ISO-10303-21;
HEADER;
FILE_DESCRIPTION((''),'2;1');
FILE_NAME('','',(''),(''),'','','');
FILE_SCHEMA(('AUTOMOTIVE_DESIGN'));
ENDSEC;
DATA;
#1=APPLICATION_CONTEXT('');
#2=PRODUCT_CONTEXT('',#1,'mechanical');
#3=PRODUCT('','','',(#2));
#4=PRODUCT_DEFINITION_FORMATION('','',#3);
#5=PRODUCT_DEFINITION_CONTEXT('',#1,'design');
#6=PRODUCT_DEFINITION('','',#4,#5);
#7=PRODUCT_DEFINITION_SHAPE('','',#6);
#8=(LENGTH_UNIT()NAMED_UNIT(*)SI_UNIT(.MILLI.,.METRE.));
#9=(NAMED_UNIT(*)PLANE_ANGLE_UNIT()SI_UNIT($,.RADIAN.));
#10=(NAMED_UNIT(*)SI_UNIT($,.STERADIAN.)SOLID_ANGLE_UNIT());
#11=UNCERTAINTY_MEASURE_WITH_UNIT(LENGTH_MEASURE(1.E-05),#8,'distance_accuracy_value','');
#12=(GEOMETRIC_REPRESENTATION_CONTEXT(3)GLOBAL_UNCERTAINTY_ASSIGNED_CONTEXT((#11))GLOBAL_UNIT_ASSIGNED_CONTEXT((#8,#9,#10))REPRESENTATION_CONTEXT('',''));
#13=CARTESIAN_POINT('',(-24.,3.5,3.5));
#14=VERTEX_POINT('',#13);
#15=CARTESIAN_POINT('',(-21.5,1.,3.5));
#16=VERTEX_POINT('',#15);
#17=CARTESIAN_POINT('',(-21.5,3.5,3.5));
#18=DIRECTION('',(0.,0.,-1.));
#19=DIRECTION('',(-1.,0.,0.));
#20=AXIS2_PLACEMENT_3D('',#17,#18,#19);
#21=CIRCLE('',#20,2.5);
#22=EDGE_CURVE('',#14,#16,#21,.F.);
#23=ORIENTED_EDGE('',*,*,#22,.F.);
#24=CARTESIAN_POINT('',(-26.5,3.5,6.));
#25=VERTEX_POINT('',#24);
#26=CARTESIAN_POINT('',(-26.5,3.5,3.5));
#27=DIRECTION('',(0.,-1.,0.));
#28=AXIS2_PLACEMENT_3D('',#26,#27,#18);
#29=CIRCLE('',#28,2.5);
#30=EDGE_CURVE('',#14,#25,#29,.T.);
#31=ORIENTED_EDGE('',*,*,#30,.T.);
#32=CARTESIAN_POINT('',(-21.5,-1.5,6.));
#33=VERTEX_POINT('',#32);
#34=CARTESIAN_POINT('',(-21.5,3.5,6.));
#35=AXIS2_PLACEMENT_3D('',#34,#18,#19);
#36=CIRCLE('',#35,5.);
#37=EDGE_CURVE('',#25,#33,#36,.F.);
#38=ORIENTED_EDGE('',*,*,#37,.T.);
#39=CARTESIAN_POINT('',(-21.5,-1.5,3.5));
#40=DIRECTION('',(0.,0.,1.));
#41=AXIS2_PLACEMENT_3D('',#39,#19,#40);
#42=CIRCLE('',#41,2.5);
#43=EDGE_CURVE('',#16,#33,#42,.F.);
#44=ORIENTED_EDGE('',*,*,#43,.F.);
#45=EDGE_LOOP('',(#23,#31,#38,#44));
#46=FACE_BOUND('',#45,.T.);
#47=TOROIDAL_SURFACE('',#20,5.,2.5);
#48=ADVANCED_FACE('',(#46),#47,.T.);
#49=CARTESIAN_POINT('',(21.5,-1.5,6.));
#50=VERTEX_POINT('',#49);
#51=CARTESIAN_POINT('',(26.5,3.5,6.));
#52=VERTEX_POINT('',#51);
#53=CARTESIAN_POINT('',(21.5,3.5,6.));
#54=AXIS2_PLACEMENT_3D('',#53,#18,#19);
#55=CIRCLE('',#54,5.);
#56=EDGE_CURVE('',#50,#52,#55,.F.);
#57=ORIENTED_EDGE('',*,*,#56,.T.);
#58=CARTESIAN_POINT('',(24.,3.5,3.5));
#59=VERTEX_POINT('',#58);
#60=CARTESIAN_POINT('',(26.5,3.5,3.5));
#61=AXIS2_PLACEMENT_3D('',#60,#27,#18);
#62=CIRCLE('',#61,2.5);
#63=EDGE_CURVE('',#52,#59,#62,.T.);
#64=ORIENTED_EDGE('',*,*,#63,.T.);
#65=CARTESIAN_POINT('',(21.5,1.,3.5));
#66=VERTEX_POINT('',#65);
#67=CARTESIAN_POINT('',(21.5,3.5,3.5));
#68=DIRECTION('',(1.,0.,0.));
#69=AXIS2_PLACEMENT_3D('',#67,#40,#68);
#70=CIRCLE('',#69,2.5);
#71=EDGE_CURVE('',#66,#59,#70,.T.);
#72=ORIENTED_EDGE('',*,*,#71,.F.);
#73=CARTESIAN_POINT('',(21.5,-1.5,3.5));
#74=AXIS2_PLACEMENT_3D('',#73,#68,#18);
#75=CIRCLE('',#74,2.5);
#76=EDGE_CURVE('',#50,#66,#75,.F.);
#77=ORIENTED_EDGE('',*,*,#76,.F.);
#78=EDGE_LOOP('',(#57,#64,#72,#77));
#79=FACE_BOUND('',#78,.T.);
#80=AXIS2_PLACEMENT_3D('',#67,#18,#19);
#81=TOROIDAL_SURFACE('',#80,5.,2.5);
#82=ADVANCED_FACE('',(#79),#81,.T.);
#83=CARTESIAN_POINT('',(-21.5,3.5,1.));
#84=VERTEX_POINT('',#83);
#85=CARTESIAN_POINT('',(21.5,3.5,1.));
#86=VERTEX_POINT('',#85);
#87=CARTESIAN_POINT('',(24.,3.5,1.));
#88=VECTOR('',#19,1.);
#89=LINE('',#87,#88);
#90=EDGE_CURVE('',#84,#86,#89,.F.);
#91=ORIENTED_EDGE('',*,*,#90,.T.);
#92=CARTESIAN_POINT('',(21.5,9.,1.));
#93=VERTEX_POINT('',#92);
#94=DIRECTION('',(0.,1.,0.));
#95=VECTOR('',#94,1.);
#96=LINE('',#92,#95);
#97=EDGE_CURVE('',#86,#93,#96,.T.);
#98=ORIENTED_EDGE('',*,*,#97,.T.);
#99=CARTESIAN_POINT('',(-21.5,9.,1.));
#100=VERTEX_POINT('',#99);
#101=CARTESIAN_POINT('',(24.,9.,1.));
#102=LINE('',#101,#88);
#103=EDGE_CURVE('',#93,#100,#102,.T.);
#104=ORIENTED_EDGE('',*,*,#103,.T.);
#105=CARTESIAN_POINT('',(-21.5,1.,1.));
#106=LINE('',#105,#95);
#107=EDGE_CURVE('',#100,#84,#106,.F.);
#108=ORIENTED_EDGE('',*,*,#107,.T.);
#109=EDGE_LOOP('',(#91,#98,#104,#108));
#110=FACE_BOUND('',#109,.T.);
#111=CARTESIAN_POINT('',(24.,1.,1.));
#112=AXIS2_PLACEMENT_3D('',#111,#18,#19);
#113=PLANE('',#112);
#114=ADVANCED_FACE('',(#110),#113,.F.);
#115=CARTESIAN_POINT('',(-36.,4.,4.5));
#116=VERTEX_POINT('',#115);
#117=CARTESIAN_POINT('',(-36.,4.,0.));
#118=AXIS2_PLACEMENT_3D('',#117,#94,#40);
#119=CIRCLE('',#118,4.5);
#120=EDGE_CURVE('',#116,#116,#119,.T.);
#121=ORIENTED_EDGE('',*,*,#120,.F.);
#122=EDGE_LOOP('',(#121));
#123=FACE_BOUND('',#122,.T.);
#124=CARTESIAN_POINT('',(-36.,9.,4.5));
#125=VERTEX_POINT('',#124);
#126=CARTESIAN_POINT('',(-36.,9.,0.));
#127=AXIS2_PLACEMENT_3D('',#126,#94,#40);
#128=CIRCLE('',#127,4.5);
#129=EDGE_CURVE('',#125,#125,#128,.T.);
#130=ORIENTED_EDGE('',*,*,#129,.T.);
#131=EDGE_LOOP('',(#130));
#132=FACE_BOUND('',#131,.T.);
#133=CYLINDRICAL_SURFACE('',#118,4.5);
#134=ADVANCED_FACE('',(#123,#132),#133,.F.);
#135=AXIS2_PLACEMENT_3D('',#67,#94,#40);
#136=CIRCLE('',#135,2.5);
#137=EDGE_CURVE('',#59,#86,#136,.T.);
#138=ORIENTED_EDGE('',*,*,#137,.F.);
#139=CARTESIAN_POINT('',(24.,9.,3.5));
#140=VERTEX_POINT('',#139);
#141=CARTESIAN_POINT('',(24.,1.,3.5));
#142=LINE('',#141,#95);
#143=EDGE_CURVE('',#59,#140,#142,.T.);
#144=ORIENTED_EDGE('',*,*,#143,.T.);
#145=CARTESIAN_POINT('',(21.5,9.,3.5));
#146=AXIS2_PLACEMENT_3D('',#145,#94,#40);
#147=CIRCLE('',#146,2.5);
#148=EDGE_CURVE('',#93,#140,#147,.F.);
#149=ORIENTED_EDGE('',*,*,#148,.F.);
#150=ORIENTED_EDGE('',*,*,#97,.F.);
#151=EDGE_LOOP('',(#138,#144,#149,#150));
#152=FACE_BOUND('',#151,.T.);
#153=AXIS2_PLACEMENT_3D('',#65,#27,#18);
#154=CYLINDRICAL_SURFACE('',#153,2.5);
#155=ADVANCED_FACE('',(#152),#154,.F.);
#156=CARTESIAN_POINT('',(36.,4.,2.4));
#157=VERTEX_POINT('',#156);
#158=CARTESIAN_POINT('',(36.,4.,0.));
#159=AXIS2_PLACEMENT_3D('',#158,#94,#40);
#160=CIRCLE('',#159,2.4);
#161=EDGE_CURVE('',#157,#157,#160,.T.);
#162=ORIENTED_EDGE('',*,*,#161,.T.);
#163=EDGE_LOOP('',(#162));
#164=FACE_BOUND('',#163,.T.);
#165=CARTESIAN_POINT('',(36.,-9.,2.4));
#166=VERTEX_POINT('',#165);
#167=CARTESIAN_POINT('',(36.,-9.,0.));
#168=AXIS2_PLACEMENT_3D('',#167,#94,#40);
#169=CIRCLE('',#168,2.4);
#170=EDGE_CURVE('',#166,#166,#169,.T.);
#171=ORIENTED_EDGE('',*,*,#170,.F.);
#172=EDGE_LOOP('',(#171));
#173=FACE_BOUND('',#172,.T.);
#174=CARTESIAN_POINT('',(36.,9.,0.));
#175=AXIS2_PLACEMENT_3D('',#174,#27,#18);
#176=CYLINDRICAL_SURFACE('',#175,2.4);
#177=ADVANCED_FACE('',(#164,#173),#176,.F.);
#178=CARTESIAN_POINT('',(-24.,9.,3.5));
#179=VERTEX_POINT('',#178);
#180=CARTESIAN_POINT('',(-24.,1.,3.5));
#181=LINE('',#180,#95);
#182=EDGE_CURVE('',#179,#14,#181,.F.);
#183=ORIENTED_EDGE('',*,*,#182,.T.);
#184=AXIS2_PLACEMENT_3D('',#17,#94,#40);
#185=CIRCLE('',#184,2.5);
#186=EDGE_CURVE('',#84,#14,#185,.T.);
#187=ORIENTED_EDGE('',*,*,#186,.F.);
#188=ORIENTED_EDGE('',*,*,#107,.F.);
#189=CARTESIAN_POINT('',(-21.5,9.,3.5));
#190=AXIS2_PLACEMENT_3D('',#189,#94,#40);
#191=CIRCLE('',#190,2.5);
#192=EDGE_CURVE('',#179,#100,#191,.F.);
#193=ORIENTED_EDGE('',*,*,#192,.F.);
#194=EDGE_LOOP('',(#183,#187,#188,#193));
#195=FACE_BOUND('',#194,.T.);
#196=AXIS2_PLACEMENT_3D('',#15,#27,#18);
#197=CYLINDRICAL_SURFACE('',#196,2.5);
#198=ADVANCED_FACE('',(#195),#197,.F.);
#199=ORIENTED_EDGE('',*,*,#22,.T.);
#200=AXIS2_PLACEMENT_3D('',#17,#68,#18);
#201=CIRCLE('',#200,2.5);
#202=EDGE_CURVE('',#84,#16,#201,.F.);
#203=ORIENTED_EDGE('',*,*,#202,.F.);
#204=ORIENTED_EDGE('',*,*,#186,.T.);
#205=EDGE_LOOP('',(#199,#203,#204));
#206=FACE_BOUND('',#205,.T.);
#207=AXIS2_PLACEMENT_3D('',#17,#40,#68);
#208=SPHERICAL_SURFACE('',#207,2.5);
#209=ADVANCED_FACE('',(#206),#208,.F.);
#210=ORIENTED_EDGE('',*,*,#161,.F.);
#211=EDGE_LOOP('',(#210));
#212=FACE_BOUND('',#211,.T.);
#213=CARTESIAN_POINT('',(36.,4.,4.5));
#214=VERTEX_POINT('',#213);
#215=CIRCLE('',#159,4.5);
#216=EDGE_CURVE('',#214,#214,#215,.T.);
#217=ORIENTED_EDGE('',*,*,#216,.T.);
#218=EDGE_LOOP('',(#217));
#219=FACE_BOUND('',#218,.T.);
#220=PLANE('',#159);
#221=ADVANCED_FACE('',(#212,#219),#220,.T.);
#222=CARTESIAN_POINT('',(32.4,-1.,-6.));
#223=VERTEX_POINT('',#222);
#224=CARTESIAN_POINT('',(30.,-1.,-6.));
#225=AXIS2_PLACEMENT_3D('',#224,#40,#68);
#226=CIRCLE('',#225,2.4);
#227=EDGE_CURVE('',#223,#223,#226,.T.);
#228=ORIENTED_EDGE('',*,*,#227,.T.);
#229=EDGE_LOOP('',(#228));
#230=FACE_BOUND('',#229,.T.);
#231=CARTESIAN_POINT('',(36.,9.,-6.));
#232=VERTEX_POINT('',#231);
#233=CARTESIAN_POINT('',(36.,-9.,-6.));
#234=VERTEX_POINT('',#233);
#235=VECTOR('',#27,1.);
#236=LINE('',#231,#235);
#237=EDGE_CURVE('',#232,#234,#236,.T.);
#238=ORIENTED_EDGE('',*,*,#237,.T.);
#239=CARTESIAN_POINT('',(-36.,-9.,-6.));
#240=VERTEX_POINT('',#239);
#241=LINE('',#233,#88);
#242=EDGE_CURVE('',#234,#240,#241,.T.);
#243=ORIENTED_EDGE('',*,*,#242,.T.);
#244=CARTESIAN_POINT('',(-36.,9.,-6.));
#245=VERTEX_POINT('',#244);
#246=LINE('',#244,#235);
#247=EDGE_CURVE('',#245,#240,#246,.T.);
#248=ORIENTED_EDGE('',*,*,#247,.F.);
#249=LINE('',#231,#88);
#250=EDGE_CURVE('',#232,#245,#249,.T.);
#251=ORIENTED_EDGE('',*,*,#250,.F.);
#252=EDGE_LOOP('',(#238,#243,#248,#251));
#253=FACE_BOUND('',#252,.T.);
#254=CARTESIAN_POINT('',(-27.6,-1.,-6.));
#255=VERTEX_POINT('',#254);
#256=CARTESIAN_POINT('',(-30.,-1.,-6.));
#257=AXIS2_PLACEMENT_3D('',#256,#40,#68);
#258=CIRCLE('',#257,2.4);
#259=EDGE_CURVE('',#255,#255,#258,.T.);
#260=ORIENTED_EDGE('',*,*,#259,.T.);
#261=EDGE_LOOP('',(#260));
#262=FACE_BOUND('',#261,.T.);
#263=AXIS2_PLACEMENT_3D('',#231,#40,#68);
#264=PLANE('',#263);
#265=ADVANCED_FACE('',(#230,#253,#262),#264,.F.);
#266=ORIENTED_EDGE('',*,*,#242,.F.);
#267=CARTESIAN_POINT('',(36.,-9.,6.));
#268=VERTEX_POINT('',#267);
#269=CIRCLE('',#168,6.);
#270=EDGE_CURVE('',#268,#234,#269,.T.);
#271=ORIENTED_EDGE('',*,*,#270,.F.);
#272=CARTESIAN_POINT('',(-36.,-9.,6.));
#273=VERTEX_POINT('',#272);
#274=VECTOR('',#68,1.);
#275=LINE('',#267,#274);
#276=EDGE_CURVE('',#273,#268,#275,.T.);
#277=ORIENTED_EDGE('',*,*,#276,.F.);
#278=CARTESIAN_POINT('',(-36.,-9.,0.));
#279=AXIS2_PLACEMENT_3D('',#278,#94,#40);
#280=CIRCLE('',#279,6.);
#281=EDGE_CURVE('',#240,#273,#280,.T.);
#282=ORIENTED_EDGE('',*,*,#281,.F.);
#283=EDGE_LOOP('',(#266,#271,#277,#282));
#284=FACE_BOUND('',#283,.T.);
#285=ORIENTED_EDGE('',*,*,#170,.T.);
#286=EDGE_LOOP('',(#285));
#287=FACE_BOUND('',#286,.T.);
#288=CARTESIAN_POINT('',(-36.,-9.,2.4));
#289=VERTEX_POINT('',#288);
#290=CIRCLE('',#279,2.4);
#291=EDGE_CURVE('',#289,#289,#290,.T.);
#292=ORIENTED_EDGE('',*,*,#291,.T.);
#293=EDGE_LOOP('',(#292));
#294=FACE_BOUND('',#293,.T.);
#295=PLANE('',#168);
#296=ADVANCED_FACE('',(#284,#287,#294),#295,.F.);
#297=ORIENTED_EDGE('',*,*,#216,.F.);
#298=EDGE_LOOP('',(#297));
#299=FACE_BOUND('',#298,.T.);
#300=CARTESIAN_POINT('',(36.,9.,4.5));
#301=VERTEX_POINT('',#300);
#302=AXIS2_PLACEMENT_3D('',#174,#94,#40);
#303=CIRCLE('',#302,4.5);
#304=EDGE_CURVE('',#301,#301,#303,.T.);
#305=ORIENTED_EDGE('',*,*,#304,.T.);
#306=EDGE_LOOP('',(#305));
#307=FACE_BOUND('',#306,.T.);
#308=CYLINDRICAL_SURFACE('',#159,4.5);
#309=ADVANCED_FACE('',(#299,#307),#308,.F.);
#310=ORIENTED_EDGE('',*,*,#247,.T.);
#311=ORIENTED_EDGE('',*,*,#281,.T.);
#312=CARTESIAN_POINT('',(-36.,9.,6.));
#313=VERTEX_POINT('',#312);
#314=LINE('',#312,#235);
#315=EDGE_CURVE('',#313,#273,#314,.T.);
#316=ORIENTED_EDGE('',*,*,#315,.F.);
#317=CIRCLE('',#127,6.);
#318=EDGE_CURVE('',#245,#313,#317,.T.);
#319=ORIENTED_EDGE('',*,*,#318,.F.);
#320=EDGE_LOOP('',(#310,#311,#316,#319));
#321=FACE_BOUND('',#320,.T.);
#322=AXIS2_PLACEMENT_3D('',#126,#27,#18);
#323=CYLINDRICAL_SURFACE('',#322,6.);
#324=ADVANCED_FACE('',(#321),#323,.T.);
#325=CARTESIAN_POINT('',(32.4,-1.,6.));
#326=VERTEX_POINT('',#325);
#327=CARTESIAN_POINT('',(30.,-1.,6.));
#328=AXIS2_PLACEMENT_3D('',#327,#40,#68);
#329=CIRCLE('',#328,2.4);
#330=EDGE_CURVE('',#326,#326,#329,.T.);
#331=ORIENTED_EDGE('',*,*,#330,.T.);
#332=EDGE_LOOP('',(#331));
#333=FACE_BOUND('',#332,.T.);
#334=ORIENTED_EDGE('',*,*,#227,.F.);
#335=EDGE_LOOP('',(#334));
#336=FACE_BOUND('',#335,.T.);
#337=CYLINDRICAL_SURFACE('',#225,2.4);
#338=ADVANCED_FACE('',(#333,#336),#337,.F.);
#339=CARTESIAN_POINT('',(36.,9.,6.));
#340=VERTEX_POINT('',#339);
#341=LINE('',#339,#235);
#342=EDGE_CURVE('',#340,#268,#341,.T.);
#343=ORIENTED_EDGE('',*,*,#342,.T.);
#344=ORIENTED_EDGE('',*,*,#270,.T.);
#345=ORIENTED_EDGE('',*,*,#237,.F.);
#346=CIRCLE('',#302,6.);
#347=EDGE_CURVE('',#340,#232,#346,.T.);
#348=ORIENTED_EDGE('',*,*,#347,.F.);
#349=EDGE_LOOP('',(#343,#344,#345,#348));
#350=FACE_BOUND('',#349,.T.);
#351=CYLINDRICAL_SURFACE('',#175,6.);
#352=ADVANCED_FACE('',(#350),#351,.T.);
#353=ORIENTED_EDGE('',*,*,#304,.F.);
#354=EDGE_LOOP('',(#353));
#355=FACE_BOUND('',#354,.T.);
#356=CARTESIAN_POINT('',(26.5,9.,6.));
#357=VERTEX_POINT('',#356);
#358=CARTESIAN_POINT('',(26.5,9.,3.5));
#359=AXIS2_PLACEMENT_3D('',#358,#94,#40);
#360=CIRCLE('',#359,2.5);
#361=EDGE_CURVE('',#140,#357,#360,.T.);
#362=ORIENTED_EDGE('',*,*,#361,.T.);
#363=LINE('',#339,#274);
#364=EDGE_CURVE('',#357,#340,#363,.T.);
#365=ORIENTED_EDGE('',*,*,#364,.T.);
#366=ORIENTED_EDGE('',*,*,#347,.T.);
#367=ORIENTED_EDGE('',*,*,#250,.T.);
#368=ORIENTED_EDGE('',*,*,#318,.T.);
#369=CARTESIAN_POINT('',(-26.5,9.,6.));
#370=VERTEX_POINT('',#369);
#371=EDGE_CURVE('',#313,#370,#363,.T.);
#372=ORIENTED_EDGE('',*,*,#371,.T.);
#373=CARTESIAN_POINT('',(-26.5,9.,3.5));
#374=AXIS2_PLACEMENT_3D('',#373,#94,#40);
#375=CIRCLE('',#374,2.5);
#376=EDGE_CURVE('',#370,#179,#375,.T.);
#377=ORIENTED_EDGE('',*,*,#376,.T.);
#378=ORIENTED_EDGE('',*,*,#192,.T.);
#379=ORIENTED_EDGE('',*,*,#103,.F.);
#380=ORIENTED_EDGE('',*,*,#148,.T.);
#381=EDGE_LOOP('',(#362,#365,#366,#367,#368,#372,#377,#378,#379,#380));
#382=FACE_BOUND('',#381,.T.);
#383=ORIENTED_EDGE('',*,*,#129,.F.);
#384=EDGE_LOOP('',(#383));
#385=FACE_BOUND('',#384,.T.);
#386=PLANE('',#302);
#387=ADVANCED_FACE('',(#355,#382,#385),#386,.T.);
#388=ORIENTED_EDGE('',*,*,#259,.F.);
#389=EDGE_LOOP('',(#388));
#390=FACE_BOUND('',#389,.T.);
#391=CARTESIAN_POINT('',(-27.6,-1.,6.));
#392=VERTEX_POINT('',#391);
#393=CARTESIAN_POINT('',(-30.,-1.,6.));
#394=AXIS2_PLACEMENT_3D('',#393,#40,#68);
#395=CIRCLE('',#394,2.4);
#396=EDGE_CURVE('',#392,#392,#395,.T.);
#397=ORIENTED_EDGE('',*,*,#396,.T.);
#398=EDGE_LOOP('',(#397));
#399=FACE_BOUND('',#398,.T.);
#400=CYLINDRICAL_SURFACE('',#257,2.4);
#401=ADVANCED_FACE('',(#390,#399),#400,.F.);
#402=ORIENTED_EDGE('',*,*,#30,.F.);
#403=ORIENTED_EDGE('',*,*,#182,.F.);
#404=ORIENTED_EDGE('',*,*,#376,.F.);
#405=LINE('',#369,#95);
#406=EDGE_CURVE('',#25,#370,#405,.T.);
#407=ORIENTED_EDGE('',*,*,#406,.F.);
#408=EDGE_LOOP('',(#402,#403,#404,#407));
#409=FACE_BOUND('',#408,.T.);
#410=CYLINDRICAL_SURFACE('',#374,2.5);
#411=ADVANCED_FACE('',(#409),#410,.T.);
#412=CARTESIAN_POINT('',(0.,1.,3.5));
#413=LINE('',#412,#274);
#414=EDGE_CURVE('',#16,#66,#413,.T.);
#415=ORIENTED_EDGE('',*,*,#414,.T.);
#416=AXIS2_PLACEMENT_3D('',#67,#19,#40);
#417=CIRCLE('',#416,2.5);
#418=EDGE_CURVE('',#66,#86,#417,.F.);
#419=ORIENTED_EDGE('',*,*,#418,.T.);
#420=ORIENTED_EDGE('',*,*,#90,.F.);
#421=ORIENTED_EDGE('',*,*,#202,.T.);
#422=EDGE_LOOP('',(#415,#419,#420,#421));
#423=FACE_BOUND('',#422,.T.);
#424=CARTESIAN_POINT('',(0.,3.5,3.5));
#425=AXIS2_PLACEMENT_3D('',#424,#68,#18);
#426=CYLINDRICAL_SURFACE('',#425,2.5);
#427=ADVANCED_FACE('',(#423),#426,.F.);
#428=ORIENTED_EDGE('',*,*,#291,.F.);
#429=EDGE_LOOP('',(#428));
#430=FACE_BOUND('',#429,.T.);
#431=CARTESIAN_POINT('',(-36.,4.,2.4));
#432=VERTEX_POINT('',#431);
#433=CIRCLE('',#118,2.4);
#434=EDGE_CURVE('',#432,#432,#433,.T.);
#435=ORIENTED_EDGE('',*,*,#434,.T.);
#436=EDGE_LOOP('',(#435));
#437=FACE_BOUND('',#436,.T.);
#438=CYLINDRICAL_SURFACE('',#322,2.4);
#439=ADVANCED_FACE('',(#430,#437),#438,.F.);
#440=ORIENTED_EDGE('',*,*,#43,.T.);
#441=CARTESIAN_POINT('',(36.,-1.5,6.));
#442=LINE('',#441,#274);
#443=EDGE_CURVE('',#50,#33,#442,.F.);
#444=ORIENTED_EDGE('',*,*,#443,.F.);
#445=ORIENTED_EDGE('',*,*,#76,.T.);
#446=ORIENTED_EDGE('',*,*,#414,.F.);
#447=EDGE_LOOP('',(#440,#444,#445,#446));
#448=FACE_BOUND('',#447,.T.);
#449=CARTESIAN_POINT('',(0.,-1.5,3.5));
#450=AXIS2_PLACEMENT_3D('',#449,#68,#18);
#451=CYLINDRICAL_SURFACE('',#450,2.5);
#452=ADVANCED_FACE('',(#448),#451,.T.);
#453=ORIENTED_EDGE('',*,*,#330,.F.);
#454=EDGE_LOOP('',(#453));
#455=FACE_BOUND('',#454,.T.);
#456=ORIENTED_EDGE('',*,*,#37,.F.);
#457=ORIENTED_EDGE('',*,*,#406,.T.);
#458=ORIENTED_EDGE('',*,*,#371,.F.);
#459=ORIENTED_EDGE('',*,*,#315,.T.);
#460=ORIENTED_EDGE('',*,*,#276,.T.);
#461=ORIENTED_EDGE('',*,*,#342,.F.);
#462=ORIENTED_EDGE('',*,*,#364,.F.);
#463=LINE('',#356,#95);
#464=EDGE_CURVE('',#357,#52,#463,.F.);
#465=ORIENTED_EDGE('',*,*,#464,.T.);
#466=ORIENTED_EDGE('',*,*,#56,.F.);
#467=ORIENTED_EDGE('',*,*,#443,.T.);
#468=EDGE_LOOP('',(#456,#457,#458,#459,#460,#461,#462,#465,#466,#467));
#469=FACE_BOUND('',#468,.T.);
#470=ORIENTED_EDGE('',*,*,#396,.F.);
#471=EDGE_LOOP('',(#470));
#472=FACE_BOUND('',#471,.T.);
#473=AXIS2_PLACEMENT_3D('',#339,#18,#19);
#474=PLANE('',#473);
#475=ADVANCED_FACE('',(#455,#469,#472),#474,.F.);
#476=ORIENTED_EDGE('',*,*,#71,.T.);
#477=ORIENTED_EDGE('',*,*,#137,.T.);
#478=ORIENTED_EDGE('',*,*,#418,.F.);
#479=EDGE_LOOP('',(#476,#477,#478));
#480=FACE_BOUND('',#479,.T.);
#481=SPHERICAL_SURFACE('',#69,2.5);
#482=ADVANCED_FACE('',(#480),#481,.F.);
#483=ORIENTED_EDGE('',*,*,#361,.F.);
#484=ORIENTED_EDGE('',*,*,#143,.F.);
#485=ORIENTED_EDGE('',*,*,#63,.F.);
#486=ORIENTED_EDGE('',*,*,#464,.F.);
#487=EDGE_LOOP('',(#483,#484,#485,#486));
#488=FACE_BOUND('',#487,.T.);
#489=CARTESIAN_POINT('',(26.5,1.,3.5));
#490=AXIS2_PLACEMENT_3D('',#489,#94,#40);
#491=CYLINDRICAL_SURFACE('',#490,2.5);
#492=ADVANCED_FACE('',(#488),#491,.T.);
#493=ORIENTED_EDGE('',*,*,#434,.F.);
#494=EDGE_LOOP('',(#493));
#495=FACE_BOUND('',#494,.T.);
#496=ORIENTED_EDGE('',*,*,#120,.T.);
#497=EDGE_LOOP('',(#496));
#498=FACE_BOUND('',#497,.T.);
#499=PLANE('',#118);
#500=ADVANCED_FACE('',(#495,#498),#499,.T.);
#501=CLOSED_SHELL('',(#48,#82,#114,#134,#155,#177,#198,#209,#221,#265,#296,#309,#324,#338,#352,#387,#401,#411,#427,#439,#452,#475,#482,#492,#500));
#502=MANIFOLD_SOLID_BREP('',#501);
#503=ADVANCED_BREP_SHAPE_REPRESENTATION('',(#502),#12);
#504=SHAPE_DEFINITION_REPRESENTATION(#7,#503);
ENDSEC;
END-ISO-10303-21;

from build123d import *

# Parameters (mm, degrees)
SKETCH1_R           = 2.4
BOSS_EXTRUDE1_DEPTH = 9
SKETCH2_R           = 4.5
CUT_EXTRUDE1_DEPTH  = 5
SKETCH3_W           = 48
SKETCH3_H           = 5
CUT_EXTRUDE2_DEPTH  = 8
FILLET1_R           = 2.5
SKETCH4_R           = 2.4
CUT_EXTRUDE3_DEPTH  = 45.598206242


with BuildPart() as part:
    # Sketch1 → Boss-Extrude1 (new, symmetric)
    with BuildSketch(Plane(origin=(0, 0, 0), x_dir=(1, 0, 0), z_dir=(0, 1, 0))):
        with BuildLine():
            Line((36, -6), (-36, -6))
            ThreePointArc((-36, -6), (-42, 0), (-36, 6))
            Line((-36, 6), (36, 6))
            ThreePointArc((36, 6), (42, 0), (36, -6))
        make_face()
        with Locations(Location((-36, 0, 0), (0, 0, 270))):
            Circle(SKETCH1_R, mode=Mode.SUBTRACT)
        with Locations(Location((36, 0, 0), (0, 0, 270))):
            Circle(SKETCH1_R, mode=Mode.SUBTRACT)
    extrude(amount=BOSS_EXTRUDE1_DEPTH, both=True)

    # Sketch2 → Cut-Extrude1 (cut)
    with BuildSketch(Plane(origin=(0, 9, 0), x_dir=(1, 0, 0), z_dir=(0, 1, 0))):
        with Locations(Location((-36, 0, 0), (0, 0, 270))):
            Circle(SKETCH2_R)
        with Locations(Location((36, 0, 0), (0, 0, 270))):
            Circle(SKETCH2_R)
    extrude(amount=-CUT_EXTRUDE1_DEPTH, mode=Mode.SUBTRACT)

    # Sketch3 → Cut-Extrude2 (cut)
    with BuildSketch(Plane(origin=(0, 9, 0), x_dir=(1, 0, 0), z_dir=(0, 1, 0))):
        with Locations((0, -3.5)):
            Rectangle(SKETCH3_W, SKETCH3_H)
    extrude(amount=-CUT_EXTRUDE2_DEPTH, mode=Mode.SUBTRACT)

    # Fillet1
    fillet1_edges = [part.edges().sort_by_distance(p)[0] for p in [
        (-24, 1, 3.5),
        (-24, 5, 6),
        (0, 1, 1),
        (-24, 5, 1),
        (24, 1, 3.5),
        (24, 5, 1),
        (0, 1, 6),
        (24, 5, 6),
    ]]
    fillet(fillet1_edges, radius=FILLET1_R - 0.0001)  # a hair under: the kernel refuses the full size

    # Sketch4 → Cut-Extrude3 (cut, through all)
    with BuildSketch(Plane.XY.offset(6)):
        with Locations((-30, -1)):
            Circle(SKETCH4_R)
        with Locations((30, -1)):
            Circle(SKETCH4_R)
    extrude(amount=-CUT_EXTRUDE3_DEPTH, mode=Mode.SUBTRACT)


solid = part.part
